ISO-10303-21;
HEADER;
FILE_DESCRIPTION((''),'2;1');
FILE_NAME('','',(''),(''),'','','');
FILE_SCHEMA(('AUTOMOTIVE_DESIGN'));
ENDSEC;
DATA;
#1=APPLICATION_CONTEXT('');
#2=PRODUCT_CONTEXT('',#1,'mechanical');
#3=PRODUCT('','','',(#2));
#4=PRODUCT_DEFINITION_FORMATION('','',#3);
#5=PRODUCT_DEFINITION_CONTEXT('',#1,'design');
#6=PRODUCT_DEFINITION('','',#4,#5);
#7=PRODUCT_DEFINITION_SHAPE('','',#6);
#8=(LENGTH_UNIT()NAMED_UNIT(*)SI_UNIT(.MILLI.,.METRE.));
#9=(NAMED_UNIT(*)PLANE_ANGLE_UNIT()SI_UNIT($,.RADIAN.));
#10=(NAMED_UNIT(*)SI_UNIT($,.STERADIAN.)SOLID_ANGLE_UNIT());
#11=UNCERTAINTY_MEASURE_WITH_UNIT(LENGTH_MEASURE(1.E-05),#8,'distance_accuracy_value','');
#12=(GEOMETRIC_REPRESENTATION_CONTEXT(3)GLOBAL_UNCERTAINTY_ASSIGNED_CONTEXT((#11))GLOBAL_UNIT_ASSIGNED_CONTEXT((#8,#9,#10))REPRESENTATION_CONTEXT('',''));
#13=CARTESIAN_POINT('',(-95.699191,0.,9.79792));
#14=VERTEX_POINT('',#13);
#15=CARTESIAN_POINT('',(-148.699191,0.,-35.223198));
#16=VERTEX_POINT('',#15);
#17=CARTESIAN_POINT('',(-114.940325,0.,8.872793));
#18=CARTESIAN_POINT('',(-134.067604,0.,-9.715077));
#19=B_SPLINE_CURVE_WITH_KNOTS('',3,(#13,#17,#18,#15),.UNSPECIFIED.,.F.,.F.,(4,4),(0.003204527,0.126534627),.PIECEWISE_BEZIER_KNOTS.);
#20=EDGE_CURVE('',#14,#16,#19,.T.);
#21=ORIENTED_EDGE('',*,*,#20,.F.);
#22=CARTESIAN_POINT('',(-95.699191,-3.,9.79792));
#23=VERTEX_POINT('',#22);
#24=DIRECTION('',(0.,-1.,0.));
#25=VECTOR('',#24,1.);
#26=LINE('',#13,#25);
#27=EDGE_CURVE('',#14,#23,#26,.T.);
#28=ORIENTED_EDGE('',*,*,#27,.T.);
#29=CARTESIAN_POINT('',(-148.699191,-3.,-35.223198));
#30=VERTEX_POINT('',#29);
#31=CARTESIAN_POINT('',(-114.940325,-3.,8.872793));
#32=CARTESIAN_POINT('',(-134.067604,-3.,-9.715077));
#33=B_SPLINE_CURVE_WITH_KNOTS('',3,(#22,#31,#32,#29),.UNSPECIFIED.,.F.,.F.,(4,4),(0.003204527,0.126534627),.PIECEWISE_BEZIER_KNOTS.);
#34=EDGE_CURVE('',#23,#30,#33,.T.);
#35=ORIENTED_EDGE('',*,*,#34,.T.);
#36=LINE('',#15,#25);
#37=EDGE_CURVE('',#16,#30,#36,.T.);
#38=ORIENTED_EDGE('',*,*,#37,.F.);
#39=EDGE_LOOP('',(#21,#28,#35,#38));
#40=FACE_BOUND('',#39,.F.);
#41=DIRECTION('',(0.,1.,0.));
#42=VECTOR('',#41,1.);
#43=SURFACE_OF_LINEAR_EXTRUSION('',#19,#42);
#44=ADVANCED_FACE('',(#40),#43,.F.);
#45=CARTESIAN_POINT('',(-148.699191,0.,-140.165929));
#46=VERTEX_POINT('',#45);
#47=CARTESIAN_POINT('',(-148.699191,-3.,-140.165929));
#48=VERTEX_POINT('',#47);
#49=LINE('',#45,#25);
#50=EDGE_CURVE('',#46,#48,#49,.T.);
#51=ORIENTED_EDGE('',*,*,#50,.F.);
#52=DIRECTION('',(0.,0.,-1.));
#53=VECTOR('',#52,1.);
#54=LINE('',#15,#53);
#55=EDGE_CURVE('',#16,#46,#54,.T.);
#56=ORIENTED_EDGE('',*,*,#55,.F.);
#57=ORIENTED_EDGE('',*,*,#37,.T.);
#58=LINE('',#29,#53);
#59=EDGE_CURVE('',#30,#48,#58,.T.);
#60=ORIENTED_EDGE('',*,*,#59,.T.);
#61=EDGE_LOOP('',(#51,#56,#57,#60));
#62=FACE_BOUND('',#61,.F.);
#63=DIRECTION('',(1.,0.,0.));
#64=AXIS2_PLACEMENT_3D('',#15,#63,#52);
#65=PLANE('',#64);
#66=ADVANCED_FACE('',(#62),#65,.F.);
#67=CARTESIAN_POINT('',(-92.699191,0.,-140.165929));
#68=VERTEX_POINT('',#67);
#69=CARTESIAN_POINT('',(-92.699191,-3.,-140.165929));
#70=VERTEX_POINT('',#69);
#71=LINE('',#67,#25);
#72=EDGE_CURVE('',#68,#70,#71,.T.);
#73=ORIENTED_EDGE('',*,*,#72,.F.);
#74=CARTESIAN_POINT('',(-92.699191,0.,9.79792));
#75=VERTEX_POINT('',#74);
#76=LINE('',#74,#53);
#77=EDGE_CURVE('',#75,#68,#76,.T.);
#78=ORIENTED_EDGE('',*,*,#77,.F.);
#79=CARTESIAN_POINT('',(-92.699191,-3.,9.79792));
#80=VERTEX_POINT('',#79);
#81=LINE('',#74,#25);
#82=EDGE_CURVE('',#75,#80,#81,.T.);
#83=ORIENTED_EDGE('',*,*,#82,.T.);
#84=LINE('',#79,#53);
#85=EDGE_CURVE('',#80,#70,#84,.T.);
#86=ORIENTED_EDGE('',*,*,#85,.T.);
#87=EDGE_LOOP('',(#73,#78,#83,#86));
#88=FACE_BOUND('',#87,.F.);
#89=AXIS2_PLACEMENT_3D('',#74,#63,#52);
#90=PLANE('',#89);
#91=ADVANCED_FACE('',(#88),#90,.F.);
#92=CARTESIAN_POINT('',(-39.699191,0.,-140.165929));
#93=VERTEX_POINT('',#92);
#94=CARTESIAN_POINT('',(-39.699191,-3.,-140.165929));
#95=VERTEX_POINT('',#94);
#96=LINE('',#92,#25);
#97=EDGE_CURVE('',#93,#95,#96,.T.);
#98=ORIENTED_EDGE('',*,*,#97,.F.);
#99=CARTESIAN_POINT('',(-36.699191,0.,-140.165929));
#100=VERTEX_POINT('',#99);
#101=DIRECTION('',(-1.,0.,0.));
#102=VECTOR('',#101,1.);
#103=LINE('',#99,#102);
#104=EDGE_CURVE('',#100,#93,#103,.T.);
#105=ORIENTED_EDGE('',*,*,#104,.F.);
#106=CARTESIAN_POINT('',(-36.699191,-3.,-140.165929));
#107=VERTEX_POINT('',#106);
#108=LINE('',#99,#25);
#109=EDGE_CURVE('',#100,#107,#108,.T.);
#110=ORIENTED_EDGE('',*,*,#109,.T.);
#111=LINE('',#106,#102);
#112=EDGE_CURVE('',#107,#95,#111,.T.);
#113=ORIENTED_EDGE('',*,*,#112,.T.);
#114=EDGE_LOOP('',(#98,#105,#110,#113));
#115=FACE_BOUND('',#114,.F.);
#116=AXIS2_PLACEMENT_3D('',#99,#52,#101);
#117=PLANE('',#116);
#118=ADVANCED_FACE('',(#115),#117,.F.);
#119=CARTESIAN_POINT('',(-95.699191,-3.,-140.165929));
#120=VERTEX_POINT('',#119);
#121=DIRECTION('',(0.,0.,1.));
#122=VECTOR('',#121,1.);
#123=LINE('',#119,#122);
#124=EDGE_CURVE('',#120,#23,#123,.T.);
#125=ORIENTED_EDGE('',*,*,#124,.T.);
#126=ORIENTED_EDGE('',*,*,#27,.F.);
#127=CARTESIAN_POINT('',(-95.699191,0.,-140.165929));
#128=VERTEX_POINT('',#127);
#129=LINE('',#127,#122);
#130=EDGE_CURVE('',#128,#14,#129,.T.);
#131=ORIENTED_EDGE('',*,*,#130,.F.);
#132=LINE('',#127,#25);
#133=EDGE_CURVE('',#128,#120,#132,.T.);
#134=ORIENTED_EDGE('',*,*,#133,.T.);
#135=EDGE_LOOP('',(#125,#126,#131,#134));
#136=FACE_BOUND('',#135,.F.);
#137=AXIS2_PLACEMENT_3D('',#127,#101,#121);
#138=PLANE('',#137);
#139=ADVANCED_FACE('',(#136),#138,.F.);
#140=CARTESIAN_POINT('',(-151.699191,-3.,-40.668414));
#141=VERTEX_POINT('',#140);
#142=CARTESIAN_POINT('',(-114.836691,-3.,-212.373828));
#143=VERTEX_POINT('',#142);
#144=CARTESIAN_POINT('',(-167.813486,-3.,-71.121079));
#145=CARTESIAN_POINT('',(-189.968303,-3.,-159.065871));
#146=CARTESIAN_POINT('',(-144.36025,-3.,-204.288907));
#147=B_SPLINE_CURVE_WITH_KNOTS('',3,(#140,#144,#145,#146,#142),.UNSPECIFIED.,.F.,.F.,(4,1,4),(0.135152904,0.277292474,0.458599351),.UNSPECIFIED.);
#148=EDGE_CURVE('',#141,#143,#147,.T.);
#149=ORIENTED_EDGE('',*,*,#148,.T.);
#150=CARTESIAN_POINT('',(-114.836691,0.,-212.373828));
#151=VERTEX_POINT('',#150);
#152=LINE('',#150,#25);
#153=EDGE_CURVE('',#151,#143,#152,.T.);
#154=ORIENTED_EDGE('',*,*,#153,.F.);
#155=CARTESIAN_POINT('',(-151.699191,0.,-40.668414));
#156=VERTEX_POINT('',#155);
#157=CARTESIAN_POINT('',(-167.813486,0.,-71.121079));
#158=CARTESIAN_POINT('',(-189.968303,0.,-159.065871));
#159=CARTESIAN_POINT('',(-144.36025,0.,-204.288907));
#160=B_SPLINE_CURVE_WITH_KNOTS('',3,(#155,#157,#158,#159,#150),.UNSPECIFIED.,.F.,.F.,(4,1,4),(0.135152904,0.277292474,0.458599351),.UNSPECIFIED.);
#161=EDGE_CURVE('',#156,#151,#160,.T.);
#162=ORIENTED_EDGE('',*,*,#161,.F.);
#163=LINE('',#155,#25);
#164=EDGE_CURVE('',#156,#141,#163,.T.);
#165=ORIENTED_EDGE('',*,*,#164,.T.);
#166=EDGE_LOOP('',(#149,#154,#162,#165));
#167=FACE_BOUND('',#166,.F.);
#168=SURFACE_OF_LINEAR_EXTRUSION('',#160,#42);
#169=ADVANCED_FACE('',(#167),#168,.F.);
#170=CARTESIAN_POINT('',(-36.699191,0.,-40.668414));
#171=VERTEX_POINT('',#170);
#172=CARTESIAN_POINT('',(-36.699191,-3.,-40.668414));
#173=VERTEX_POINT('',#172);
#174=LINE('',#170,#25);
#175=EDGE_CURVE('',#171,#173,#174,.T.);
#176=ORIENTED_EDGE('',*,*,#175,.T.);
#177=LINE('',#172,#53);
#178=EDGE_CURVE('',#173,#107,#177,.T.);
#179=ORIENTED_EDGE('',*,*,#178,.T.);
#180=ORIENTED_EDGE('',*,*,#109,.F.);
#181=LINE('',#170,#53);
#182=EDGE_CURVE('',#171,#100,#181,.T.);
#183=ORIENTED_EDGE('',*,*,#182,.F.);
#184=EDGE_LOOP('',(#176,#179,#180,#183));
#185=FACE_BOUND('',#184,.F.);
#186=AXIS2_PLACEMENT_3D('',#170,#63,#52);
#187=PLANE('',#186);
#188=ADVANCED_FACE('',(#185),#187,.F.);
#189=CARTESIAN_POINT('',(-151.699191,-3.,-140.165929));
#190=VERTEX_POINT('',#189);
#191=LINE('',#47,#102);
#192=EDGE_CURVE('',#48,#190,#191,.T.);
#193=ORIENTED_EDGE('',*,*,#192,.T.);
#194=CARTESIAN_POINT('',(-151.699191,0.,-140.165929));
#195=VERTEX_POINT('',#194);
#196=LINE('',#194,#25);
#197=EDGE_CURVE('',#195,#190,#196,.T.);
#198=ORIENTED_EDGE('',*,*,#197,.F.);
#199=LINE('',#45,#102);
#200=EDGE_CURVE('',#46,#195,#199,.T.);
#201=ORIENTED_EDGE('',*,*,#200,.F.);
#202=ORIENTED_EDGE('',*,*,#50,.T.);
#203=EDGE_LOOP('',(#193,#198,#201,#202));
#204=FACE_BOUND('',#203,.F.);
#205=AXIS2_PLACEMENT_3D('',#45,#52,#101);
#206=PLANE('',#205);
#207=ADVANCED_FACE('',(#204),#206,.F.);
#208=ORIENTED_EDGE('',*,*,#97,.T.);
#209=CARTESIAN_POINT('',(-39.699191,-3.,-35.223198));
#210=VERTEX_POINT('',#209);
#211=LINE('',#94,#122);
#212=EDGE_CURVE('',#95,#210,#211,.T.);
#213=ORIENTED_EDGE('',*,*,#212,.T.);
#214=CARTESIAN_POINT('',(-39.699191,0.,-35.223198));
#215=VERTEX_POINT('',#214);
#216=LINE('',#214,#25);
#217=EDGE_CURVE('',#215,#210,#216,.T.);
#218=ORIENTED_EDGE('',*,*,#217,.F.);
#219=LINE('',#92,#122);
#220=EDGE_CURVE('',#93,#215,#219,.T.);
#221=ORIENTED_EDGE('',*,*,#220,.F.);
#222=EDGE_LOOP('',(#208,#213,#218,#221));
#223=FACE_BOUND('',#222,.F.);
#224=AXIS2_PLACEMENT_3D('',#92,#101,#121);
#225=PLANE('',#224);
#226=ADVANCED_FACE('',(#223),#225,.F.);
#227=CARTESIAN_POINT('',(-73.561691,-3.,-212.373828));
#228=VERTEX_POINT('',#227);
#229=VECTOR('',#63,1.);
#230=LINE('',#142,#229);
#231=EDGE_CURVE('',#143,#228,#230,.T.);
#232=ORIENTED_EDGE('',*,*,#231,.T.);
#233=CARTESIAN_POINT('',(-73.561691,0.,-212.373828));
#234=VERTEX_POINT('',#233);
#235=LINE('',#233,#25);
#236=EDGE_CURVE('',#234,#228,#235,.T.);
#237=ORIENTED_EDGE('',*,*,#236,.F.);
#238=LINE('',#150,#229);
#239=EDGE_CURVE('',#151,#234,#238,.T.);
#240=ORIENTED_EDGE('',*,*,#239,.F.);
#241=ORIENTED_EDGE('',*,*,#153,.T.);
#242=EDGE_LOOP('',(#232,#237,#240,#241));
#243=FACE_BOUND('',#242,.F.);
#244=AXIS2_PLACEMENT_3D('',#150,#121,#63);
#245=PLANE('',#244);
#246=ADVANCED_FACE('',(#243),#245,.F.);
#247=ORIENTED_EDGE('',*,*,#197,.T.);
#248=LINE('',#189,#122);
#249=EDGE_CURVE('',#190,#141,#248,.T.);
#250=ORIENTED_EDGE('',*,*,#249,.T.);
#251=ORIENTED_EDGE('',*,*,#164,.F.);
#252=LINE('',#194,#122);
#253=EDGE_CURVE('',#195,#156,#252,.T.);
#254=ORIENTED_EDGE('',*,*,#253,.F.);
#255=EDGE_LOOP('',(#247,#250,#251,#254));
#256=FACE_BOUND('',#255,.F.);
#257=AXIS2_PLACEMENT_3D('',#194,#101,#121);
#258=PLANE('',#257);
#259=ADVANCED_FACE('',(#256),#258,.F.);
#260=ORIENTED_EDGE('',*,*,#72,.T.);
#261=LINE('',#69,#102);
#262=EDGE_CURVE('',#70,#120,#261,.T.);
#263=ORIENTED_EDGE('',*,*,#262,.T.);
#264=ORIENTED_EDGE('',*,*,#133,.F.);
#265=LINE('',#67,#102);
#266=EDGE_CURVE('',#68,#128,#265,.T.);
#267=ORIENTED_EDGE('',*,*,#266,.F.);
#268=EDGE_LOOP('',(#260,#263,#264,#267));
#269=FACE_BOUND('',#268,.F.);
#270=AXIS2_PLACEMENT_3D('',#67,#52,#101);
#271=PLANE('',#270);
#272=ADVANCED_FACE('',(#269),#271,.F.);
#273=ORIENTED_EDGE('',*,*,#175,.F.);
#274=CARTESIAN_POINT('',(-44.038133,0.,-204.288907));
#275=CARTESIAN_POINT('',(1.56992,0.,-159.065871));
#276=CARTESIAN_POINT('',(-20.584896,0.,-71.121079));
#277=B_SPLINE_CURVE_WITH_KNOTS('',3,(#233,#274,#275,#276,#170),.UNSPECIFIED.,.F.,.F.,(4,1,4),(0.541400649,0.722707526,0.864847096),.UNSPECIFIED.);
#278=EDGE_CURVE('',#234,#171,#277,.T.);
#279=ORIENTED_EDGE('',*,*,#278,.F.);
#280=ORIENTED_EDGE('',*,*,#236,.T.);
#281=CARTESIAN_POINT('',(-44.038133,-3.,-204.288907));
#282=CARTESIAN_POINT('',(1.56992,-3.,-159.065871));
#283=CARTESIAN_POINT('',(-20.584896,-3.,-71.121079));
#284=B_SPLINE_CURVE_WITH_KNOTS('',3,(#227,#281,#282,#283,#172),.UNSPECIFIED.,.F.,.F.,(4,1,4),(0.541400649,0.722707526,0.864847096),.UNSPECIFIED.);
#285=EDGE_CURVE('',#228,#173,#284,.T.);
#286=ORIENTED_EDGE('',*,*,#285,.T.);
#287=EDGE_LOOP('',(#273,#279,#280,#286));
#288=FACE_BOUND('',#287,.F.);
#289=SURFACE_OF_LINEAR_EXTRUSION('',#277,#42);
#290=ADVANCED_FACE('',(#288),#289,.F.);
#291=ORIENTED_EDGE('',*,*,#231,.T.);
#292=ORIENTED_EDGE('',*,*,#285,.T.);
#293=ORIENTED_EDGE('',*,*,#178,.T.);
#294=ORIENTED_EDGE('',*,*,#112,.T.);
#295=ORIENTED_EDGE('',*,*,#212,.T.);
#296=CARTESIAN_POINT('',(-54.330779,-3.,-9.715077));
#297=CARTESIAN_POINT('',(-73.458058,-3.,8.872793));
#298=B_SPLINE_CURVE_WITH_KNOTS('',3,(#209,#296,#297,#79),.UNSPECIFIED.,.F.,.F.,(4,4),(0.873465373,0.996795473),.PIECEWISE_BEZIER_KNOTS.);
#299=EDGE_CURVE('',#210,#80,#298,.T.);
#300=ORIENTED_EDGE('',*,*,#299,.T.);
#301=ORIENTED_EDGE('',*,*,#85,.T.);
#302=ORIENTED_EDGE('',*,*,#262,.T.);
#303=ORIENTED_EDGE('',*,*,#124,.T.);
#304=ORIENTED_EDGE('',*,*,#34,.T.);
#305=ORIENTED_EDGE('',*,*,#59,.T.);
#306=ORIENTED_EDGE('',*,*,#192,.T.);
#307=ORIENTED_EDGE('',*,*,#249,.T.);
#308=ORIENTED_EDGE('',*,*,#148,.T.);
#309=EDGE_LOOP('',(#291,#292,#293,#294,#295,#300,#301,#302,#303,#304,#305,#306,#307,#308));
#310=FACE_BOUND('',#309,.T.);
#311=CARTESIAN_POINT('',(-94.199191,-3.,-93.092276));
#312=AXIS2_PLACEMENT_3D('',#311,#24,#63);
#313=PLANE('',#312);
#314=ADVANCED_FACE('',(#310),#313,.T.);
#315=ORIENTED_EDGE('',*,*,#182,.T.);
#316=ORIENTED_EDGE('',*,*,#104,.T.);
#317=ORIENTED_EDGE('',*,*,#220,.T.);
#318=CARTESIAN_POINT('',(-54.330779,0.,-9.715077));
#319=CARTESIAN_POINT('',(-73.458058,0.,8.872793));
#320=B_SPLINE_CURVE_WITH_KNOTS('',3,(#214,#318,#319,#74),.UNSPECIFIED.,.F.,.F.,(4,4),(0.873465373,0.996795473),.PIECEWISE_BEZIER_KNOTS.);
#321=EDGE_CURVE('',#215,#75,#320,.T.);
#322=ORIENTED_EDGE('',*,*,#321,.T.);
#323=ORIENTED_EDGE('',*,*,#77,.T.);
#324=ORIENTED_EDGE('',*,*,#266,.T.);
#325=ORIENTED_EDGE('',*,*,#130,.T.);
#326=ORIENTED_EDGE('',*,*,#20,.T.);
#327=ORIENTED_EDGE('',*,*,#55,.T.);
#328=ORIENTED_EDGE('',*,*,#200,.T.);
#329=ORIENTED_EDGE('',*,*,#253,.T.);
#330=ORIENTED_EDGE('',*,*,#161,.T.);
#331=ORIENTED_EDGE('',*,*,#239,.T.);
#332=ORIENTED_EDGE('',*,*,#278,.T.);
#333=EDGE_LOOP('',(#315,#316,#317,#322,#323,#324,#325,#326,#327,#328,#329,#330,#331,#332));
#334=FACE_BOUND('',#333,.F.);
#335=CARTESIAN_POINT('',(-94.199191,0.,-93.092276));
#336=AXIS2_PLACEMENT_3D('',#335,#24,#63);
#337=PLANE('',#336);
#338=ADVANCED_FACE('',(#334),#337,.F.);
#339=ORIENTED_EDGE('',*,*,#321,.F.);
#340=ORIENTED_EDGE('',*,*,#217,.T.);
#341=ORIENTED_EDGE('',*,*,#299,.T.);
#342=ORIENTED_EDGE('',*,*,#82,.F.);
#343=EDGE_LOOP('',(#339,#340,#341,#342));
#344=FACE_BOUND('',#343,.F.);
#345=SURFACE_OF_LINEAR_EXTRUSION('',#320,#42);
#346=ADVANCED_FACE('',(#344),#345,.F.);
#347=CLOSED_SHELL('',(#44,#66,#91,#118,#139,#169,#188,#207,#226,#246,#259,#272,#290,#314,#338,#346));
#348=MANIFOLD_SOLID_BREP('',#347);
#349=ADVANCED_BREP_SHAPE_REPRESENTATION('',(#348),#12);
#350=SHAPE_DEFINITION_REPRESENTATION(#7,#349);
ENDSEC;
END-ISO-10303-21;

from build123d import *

# Parameters (mm, degrees)
F1_DEPTH = 3


# Not quite as in the source:
# - a feature names something its author has since deleted; it is built from what else it names


with BuildPart() as f1:
    # F0 (on Front) → F1 (new body)
    with BuildSketch(Plane.XZ):
        with BuildLine():
            Line((-95.6991912493, -140.1659290001), (-95.6991912493, 9.7979199733))
            add(Edge.make_bspline(
                [(-95.6991912493, 9.7979199733), (-114.9403248651, 8.8727934734), (-134.0676037648, -9.7150772734), (-148.6991912496, -35.2231978093)],
                knots=[0.0032045269, 0.0032045269, 0.0032045269, 0.0032045269, 0.1265346274, 0.1265346274, 0.1265346274, 0.1265346274], degree=3))
            Line((-148.6991912496, -35.2231978093), (-148.6991912415, -140.1659290001))
            Line((-148.6991912415, -140.1659290001), (-151.6991912415, -140.1659290001))
            Line((-151.6991912415, -140.1659290001), (-151.6991912492, -40.6684138407))
            add(Edge.make_bspline(
                [(-151.6991912492, -40.6684138407), (-167.8134864464, -71.1210787155), (-189.9683027369, -159.0658708259), (-144.3602498784, -204.2889070632), (-114.8366912492, -212.3738275092)],
                knots=[0.135152904, 0.135152904, 0.135152904, 0.135152904, 0.2772924741, 0.4585993514, 0.4585993514, 0.4585993514, 0.4585993514], degree=3))
            Line((-114.8366912492, -212.3738275092), (-73.5616912492, -212.3738275092))
            add(Edge.make_bspline(
                [(-73.5616912492, -212.3738275092), (-44.03813262, -204.2889070632), (1.5699202449, -159.0658708196), (-20.5848960581, -71.1210786912), (-36.6991912644, -40.6684138119)],
                knots=[0.5414006486, 0.5414006486, 0.5414006486, 0.5414006486, 0.7227075259, 0.8648470961, 0.8648470961, 0.8648470961, 0.8648470961], degree=3))
            Line((-36.6991912644, -40.6684138119), (-36.6991912645, -140.1659290001))
            Line((-36.6991912645, -140.1659290001), (-39.6991912645, -140.1659290001))
            Line((-39.6991912645, -140.1659290001), (-39.6991912644, -35.223197782))
            add(Edge.make_bspline(
                [(-39.6991912644, -35.223197782), (-54.3307787472, -9.71507726), (-73.4580576403, 8.8727934739), (-92.6991912493, 9.7979199734)],
                knots=[0.8734653727, 0.8734653727, 0.8734653727, 0.8734653727, 0.9967954731, 0.9967954731, 0.9967954731, 0.9967954731], degree=3))
            Line((-92.6991912493, 9.7979199734), (-92.6991912493, -140.1659290001))
            Line((-92.6991912493, -140.1659290001), (-95.6991912493, -140.1659290001))
        make_face()
    extrude(amount=F1_DEPTH)


solid = f1.part
